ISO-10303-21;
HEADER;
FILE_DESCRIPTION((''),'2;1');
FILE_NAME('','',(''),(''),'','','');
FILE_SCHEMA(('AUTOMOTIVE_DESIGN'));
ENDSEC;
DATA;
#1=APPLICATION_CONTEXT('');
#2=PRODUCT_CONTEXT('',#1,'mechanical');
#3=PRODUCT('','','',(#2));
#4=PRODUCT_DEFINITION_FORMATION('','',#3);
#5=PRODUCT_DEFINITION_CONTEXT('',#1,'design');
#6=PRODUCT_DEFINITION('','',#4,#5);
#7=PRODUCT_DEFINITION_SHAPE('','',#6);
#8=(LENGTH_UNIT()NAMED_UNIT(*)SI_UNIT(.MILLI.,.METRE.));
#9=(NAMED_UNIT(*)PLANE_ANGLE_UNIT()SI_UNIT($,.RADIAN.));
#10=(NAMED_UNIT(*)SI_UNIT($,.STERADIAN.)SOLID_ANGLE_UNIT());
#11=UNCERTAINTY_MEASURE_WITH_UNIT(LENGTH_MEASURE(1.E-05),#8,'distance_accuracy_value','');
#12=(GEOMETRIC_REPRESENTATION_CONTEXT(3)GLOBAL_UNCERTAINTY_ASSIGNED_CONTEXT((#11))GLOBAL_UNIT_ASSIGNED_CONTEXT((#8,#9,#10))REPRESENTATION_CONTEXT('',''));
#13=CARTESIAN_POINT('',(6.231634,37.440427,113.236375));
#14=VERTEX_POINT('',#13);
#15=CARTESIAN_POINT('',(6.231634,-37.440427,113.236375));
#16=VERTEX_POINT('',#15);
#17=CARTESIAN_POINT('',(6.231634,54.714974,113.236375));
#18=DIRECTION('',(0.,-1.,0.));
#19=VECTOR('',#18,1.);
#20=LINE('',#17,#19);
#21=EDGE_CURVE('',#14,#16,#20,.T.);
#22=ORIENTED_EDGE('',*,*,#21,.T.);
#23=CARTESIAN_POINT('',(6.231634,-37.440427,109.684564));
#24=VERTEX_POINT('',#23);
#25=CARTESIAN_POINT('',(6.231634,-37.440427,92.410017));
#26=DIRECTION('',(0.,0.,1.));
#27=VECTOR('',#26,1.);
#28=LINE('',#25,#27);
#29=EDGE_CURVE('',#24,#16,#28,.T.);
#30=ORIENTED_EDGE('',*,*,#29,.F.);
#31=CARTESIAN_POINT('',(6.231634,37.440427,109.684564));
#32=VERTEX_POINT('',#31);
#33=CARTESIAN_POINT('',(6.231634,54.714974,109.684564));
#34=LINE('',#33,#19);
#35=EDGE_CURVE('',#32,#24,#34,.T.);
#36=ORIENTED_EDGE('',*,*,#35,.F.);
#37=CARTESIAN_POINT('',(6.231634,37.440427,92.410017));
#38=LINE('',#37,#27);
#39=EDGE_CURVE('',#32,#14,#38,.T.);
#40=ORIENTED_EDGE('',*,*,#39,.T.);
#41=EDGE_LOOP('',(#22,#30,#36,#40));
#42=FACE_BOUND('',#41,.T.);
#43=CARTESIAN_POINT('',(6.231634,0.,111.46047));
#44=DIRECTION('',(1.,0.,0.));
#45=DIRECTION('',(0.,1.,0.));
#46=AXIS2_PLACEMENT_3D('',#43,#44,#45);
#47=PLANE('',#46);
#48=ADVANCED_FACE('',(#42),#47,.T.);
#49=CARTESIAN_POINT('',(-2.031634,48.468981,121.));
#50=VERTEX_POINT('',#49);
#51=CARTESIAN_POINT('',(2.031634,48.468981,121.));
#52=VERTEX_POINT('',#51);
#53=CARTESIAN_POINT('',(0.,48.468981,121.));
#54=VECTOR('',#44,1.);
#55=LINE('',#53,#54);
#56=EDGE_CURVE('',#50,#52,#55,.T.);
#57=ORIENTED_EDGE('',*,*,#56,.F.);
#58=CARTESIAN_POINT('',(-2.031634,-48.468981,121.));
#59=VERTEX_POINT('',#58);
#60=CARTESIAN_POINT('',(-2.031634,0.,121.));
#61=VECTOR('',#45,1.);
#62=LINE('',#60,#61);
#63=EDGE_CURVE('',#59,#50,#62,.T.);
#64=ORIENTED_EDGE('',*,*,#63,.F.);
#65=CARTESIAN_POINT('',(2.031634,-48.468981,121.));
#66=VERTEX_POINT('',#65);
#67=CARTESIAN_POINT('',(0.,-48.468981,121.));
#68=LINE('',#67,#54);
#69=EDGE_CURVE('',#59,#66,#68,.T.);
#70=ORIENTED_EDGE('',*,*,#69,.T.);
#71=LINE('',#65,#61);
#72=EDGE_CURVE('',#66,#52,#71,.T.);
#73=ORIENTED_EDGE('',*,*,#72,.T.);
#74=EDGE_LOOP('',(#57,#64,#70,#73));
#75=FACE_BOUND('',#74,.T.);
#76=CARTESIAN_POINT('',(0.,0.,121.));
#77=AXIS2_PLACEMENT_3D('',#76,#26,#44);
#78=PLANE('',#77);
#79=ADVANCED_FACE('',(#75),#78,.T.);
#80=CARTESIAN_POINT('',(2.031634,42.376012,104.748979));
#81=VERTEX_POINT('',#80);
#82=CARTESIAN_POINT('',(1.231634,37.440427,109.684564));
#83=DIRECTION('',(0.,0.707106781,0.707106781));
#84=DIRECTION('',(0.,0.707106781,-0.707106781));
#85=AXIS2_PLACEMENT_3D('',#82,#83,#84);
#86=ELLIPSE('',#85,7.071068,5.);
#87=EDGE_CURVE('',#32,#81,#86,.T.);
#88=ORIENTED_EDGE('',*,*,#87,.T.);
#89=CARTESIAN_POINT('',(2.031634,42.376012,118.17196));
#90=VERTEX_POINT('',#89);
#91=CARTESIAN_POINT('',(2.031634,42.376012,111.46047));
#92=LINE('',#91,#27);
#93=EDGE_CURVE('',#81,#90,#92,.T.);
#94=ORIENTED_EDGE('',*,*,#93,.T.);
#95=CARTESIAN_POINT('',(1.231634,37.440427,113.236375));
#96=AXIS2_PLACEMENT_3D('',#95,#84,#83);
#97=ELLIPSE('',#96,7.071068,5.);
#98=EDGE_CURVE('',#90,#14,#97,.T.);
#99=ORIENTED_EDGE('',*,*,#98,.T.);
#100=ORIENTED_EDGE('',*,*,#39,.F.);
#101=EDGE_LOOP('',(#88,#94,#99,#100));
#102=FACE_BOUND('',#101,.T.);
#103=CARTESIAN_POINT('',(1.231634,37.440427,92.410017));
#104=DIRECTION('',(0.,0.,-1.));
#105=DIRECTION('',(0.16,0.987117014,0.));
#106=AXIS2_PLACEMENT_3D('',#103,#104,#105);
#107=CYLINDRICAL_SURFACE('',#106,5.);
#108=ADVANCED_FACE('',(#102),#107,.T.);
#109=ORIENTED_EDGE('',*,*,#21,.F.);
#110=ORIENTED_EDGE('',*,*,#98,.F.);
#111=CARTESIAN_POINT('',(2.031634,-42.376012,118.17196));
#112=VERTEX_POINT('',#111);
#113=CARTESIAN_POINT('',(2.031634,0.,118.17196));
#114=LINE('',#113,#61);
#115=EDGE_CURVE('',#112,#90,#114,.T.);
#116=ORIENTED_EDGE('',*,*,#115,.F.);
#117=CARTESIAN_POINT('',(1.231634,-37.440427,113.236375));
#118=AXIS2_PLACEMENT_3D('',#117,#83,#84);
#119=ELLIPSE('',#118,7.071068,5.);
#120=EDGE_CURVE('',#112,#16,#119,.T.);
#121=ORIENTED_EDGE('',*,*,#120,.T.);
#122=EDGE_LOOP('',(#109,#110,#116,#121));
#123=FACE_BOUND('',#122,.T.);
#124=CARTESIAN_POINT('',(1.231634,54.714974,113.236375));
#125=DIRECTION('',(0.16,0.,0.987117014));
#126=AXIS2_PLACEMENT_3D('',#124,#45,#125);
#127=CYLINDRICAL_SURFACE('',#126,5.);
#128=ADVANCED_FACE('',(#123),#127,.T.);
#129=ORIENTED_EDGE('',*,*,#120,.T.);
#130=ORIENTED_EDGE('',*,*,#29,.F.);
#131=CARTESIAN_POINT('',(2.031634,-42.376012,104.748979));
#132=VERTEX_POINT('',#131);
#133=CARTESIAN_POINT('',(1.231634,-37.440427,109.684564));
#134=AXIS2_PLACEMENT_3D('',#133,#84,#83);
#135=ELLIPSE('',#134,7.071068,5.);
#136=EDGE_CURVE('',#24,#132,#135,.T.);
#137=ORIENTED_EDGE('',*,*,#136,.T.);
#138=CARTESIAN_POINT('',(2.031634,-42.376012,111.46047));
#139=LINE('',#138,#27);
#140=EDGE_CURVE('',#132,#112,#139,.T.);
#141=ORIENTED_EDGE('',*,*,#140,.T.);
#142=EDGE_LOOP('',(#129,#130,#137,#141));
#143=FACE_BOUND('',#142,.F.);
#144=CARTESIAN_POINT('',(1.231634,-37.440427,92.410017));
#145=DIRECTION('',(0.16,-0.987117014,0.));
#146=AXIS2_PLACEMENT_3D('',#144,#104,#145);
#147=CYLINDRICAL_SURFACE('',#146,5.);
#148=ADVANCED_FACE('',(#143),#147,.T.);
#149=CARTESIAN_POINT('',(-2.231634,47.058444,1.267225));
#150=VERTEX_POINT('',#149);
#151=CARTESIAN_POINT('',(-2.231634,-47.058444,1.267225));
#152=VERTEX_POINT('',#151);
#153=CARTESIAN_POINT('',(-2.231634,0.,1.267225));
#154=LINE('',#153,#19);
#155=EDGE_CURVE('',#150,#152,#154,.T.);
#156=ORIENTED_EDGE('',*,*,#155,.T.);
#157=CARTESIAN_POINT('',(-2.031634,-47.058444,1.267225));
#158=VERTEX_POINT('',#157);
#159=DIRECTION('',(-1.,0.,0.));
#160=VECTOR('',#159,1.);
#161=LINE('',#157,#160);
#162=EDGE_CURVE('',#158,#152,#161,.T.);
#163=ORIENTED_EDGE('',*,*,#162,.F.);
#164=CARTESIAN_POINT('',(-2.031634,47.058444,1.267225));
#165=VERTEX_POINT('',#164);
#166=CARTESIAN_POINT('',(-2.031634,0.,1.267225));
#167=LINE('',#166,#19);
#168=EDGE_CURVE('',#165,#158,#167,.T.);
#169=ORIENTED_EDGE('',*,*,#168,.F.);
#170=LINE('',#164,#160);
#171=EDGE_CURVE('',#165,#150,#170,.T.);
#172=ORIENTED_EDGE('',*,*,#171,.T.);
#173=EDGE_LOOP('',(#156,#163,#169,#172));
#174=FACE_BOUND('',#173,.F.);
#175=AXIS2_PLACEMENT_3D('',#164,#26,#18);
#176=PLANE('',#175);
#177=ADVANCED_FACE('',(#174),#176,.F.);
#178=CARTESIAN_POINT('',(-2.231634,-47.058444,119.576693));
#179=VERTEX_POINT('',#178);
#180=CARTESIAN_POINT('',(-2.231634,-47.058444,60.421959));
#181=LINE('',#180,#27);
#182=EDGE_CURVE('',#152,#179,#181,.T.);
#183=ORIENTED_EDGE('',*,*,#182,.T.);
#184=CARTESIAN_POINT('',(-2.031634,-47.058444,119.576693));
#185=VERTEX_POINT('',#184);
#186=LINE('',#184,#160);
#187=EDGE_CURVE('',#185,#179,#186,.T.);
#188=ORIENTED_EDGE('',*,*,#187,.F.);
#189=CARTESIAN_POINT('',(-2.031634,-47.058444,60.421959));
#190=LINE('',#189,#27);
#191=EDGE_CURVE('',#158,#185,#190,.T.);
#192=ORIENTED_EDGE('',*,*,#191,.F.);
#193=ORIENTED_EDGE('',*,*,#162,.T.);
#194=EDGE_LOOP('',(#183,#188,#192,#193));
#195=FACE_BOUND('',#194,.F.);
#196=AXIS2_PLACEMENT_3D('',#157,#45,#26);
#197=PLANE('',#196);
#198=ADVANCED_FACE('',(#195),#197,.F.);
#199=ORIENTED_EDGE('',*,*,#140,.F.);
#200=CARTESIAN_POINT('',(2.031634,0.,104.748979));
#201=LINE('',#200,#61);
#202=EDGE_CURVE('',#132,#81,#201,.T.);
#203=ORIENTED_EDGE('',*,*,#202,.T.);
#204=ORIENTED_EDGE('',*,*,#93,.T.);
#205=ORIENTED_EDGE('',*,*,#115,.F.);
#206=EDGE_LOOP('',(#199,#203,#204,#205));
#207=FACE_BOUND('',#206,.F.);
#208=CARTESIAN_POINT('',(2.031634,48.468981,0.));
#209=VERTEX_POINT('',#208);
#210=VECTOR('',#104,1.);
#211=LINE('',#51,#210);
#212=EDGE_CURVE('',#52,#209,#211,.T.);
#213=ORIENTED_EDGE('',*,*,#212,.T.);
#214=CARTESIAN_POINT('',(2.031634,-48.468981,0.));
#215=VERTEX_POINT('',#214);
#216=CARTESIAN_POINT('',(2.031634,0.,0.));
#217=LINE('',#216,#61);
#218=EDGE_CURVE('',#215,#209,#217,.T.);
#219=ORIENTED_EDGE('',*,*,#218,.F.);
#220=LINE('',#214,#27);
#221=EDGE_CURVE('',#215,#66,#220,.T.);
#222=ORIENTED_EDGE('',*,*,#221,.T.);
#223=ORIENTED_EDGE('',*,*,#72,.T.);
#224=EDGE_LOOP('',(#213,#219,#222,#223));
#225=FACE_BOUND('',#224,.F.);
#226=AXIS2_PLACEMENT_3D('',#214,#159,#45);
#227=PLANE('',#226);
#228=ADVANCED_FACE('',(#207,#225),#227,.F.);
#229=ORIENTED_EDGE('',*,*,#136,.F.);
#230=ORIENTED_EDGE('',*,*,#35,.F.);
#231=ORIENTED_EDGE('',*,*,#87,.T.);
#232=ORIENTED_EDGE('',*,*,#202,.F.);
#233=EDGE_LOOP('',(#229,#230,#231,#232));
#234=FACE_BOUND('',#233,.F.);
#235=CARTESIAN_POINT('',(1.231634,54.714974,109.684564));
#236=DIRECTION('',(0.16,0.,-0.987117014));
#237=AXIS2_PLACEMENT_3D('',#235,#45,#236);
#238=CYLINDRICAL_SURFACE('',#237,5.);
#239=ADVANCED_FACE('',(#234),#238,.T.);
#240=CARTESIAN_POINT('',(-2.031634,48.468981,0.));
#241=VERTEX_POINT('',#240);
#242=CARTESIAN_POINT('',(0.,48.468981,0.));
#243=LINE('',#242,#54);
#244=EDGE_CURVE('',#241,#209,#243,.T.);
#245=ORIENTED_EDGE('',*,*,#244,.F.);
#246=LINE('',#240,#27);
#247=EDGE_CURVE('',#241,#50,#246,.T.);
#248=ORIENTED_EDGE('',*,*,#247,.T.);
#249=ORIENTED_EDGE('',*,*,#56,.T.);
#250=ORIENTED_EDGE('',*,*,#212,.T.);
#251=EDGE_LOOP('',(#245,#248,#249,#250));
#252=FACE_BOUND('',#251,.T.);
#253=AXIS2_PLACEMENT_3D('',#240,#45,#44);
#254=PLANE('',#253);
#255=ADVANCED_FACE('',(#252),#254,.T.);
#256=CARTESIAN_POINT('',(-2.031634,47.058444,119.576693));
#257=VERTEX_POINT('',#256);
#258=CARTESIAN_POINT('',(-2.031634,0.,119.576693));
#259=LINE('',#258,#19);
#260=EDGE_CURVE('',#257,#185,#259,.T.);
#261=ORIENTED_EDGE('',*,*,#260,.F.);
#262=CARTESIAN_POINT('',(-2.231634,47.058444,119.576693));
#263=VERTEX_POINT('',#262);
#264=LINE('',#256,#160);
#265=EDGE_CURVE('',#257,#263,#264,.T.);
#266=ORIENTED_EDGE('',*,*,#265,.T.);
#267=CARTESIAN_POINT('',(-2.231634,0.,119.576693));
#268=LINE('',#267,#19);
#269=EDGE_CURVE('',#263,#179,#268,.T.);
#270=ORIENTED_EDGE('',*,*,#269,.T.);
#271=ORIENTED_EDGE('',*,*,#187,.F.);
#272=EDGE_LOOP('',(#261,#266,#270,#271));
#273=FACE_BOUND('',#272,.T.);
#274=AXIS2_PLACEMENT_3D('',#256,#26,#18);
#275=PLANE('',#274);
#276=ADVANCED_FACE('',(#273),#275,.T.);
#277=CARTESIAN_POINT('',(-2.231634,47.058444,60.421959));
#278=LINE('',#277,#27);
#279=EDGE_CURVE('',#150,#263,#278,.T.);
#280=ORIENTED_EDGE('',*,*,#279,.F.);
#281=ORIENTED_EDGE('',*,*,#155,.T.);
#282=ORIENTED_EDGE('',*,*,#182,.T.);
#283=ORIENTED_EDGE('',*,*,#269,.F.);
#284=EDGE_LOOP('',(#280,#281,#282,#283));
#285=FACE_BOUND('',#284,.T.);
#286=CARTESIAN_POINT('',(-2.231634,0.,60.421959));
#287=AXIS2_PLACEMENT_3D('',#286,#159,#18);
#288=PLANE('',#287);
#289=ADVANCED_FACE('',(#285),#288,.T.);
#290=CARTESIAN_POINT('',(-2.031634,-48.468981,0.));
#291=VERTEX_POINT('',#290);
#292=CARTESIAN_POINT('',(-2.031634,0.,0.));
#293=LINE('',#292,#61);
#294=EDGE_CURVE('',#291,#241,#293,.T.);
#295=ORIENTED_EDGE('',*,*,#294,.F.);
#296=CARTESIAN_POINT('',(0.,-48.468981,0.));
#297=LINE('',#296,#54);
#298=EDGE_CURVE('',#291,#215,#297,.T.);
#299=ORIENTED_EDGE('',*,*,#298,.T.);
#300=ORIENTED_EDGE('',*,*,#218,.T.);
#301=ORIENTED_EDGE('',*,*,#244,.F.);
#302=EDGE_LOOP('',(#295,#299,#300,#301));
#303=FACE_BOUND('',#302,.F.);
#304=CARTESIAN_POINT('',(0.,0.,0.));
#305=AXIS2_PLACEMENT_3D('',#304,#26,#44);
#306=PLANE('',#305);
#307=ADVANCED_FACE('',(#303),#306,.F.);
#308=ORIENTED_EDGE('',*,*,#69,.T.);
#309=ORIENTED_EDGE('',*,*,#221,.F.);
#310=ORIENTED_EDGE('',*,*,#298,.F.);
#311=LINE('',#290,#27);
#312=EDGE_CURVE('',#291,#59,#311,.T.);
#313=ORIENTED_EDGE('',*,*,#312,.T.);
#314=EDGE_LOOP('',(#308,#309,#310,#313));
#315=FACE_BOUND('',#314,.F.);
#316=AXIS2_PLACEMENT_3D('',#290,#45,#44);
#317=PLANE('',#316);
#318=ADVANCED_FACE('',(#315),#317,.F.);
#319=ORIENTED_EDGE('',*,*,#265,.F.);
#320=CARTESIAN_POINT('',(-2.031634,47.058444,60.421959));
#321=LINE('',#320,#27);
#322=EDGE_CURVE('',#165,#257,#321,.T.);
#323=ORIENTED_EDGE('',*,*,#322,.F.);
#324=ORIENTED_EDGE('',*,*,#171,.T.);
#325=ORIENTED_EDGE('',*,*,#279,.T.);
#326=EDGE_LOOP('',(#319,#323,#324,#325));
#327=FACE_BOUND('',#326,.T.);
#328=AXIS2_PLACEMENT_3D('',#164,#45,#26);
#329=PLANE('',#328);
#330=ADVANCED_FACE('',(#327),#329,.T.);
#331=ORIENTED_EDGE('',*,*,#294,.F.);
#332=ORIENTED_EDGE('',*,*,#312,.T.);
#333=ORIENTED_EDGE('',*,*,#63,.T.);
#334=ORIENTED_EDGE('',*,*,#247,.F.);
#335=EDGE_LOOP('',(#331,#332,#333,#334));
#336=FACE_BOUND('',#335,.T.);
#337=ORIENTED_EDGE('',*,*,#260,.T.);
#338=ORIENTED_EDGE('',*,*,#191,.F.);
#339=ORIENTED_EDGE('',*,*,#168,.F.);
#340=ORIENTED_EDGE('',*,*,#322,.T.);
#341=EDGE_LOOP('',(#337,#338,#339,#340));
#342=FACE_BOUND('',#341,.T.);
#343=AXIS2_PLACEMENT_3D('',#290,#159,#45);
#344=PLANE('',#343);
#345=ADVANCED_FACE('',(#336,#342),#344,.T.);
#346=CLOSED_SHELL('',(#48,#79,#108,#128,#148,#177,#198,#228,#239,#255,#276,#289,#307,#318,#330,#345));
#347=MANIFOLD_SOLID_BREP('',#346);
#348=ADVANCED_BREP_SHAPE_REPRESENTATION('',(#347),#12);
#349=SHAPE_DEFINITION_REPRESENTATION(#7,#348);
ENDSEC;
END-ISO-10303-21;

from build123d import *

# Parameters (mm, degrees)
F0_W        = 4.0632686578
F0_H        = 96.9379618764
F1_DEPTH    = 121
F2_W        = 94.1168889403
F2_H        = 118.3094680309
F3_DEPTH    = 0.2
F4_W        = 84.7520232201
F4_H        = 13.4229809046
F5_DEPTH    = 4.2
F6_T1_DEPTH = 109.4299485786
F6_T3_DEPTH = 38.1009062631


# Not quite as in the source:
# - a fillet or chamfer that OpenCascade refuses, or shapes differently, is made with other operations: its cross-section is extruded or revolved along the edge and cut away or added


with BuildPart() as f1:
    # F0 (on Top) → F1 (new body)
    with BuildSketch(Plane.XY):
        Rectangle(F0_W, F0_H)
    extrude(amount=F1_DEPTH)

    # F2 (on face) → F3 (join)
    with BuildSketch(Plane(origin=(-2.0316343289, 0, 0), x_dir=(0, -1, 0), z_dir=(-1, 0, 0))):
        with Locations((0, 60.4219585657)):
            Rectangle(F2_W, F2_H)
    extrude(amount=F3_DEPTH)

    # F4 (on face) → F5 (join)
    with BuildSketch(Plane.YZ.offset(2.0316343289)):
        with Locations((0, 111.4604696631)):
            Rectangle(F4_W, F4_H)
    extrude(amount=F5_DEPTH)

    # F6: fillet of radius 5 on 4 edges, made by hand

    # F6_s2 → F6_t1 (cut)
    with BuildSketch(Plane.XZ.offset(-54.7149742893)):
        with BuildLine():
            ThreePointArc((2.0316343289, 118.1719601154), (5.0395208818, 116.4767453929), (6.2316343289, 113.2363750437))
            Line((6.2316343289, 113.2363750437), (6.2316343289, 118.1719601154))
            Line((6.2316343289, 118.1719601154), (2.0316343289, 118.1719601154))
        make_face()
        with BuildLine():
            ThreePointArc((2.0316343289, 104.7489792109), (5.0395208818, 106.4441939334), (6.2316343289, 109.6845642826))
            Line((6.2316343289, 109.6845642826), (6.2316343289, 104.7489792109))
            Line((6.2316343289, 104.7489792109), (2.0316343289, 104.7489792109))
        make_face()
    extrude(amount=F6_T1_DEPTH, mode=Mode.SUBTRACT)

    # F6_s4 → F6_t3 (cut)
    with BuildSketch(Plane.XY.offset(92.4100165316)):
        with BuildLine():
            ThreePointArc((2.0316343289, -42.37601161), (5.0395208818, -40.6807968875), (6.2316343289, -37.4404265383))
            Line((6.2316343289, -37.4404265383), (6.2316343289, -42.37601161))
            Line((6.2316343289, -42.37601161), (2.0316343289, -42.37601161))
        make_face()
        with BuildLine():
            ThreePointArc((2.0316343289, 42.37601161), (5.0395208818, 40.6807968875), (6.2316343289, 37.4404265383))
            Line((6.2316343289, 37.4404265383), (6.2316343289, 42.37601161))
            Line((6.2316343289, 42.37601161), (2.0316343289, 42.37601161))
        make_face()
    extrude(amount=F6_T3_DEPTH, mode=Mode.SUBTRACT)


solid = f1.part
